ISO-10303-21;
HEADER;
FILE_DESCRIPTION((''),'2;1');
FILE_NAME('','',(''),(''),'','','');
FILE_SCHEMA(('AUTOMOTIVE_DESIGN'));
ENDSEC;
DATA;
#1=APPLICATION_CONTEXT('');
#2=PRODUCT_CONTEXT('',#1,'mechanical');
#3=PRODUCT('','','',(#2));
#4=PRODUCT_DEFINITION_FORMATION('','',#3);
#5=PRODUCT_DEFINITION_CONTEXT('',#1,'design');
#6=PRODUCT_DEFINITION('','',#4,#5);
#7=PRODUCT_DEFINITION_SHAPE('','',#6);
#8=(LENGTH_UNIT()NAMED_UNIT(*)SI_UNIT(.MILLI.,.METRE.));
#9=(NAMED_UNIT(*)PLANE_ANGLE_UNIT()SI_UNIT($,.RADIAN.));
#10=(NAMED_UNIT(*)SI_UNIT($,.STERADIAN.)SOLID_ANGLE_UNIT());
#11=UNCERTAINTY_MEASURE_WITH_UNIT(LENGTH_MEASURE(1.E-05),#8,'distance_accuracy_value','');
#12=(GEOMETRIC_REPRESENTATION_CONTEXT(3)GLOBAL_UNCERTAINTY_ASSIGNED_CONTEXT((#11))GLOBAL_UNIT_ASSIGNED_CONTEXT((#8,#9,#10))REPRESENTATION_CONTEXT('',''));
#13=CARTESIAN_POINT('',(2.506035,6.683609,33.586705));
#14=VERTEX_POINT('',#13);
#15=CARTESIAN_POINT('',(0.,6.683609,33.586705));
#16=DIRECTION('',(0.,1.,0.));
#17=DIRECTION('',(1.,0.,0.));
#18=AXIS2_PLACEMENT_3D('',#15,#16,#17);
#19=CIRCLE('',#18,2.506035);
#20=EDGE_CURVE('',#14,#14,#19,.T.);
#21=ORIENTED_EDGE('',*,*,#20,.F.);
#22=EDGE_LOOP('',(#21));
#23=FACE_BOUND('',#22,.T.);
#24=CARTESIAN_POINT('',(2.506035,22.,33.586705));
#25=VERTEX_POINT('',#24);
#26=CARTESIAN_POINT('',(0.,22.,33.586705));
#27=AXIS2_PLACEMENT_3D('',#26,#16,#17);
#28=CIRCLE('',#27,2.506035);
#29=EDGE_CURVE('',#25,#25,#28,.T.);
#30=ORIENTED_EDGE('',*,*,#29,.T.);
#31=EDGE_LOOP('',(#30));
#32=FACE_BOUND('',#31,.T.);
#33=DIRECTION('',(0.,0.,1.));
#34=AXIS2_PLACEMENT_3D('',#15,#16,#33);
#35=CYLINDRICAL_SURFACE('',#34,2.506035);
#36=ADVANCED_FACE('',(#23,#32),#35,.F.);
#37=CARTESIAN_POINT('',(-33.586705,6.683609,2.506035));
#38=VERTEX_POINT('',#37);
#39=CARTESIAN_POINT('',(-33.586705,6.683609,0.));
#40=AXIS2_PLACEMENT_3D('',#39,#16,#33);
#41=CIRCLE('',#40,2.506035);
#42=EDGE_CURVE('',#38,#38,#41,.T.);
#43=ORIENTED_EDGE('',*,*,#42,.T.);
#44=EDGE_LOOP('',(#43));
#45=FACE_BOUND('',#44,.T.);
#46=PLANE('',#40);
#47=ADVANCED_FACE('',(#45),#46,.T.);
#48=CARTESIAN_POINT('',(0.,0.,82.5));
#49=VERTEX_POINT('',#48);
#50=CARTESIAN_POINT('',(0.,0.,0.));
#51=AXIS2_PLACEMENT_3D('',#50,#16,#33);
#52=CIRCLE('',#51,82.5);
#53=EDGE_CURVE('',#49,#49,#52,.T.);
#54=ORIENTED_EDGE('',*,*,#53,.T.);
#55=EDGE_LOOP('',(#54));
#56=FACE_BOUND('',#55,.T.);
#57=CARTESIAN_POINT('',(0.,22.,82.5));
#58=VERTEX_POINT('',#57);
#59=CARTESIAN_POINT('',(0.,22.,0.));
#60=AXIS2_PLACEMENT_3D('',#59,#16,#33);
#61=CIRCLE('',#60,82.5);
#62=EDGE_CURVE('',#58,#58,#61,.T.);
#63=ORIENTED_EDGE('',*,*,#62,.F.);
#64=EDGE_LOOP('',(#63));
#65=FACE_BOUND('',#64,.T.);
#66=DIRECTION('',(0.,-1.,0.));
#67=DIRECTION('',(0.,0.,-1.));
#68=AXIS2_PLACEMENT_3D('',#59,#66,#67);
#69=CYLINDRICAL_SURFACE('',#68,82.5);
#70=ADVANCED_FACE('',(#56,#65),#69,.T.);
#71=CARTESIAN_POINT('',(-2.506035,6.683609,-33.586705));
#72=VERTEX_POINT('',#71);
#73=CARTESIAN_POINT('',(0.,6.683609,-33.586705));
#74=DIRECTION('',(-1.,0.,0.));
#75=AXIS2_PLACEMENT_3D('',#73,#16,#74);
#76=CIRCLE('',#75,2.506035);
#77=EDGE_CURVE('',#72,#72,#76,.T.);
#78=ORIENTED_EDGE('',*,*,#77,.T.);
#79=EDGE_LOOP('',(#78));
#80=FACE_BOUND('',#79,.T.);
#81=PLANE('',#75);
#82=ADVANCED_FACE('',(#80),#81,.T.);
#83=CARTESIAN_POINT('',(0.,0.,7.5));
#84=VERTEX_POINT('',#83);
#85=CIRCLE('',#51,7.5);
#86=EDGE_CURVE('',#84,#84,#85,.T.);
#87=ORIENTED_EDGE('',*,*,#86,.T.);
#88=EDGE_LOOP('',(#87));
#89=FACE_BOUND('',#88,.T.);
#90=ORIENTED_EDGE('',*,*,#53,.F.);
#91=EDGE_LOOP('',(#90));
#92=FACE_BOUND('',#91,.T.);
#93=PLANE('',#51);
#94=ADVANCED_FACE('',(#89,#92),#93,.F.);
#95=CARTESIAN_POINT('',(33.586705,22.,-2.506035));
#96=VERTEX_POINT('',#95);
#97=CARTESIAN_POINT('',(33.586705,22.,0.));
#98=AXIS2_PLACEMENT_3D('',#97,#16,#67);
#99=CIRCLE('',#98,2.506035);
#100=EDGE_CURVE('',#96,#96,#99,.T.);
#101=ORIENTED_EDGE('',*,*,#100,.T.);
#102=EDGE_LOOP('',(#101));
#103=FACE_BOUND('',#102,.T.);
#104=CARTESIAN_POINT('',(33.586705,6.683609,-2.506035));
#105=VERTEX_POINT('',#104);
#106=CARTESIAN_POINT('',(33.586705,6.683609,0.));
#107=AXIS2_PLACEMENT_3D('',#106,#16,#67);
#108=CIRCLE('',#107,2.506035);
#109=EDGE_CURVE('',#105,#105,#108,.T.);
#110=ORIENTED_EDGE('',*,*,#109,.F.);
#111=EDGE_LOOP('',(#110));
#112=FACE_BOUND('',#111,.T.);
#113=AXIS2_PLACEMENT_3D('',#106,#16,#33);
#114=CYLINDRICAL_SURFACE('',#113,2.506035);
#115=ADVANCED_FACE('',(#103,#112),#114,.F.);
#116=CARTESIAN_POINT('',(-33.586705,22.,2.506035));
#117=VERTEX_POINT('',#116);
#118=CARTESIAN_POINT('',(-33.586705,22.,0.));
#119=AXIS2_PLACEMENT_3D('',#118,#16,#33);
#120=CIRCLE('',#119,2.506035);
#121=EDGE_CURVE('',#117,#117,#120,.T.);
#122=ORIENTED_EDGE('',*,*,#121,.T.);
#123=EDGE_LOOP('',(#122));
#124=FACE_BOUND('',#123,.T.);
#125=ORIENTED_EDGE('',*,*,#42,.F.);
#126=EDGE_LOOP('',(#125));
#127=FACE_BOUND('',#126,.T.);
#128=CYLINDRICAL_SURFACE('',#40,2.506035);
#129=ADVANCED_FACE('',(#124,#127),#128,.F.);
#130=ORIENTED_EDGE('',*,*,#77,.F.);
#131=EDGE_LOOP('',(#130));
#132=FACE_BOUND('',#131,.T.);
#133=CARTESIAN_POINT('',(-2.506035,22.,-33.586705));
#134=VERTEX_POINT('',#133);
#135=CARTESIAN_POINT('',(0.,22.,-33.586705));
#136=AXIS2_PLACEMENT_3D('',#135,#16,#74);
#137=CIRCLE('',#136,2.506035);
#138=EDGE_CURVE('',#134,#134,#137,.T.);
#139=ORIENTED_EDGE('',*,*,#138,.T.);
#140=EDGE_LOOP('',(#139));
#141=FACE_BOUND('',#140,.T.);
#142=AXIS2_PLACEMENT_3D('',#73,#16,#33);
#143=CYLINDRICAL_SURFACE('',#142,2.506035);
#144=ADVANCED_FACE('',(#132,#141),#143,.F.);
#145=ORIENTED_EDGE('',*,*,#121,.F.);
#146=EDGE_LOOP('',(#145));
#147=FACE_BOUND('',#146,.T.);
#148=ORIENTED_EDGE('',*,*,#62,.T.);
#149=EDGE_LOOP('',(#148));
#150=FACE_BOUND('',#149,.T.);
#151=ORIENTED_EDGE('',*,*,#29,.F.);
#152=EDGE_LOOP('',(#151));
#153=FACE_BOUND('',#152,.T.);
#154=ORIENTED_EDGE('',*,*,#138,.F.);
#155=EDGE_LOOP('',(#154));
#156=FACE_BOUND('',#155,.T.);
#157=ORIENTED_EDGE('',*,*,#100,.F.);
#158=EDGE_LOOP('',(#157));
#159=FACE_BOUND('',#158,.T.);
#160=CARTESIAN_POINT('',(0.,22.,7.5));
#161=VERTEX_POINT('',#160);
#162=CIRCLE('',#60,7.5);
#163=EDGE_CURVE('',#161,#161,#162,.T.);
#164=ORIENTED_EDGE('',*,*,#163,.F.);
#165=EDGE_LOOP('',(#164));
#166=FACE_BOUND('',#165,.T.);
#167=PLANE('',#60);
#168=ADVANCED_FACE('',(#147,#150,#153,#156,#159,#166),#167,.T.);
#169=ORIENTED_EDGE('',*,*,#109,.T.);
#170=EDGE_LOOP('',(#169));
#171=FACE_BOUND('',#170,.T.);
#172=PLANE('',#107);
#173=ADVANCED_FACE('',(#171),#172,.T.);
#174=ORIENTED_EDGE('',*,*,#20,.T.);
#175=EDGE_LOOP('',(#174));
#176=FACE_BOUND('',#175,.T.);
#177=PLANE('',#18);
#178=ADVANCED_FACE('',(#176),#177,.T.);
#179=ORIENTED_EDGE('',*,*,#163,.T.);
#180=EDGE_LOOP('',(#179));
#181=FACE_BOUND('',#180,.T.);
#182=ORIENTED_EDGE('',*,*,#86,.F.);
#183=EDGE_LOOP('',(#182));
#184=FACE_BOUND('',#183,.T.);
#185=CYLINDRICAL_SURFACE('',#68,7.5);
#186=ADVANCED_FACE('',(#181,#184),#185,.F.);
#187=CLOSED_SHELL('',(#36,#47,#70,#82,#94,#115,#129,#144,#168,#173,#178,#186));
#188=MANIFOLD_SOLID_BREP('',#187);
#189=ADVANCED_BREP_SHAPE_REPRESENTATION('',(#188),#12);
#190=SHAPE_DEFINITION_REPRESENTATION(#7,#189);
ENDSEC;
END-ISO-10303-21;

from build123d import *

# Parameters (mm, degrees)
SKETCH1_R           = 82.5
BOSS_EXTRUDE1_DEPTH = 22
SKETCH2_R           = 7.5
CUT_EXTRUDE1_DEPTH  = 119.728682297
SKETCH3_R           = 2.506035233
CUT_EXTRUDE2_DEPTH  = 15.316390653
CIRPATTERN1_COUNT   = 4


with BuildPart() as part:
    # Sketch1 → Boss-Extrude1 (new body)
    with BuildSketch(Plane(origin=(0, 0, 0), x_dir=(1, 0, 0), z_dir=(0, 1, 0))):
        Circle(SKETCH1_R)
    extrude(amount=BOSS_EXTRUDE1_DEPTH)

    # Sketch2 → Cut-Extrude1 (cut, through all)
    with BuildSketch(Plane(origin=(0, 0, 0), x_dir=(1, 0, 0), z_dir=(0, 1, 0))):
        Circle(SKETCH2_R)
    extrude(amount=CUT_EXTRUDE1_DEPTH, mode=Mode.SUBTRACT)

    # Sketch3 → Cut-Extrude2 (cut)
    with BuildSketch(Plane(origin=(0, 22, 0), x_dir=(1, 0, 0), z_dir=(0, 1, 0))):
        with Locations((-33.586704901, 0)):
            Circle(SKETCH3_R)
    cut_extrude2 = extrude(amount=-CUT_EXTRUDE2_DEPTH, mode=Mode.SUBTRACT)

    # CirPattern1: Cut-Extrude2 ×4 about axis
    cirpattern1_axis = Axis((0, 0, 0), (0, 1, 0))
    for i in range(1, CIRPATTERN1_COUNT):
        add(cut_extrude2.rotate(cirpattern1_axis, i * 360 / CIRPATTERN1_COUNT), mode=Mode.SUBTRACT)


solid = part.part
